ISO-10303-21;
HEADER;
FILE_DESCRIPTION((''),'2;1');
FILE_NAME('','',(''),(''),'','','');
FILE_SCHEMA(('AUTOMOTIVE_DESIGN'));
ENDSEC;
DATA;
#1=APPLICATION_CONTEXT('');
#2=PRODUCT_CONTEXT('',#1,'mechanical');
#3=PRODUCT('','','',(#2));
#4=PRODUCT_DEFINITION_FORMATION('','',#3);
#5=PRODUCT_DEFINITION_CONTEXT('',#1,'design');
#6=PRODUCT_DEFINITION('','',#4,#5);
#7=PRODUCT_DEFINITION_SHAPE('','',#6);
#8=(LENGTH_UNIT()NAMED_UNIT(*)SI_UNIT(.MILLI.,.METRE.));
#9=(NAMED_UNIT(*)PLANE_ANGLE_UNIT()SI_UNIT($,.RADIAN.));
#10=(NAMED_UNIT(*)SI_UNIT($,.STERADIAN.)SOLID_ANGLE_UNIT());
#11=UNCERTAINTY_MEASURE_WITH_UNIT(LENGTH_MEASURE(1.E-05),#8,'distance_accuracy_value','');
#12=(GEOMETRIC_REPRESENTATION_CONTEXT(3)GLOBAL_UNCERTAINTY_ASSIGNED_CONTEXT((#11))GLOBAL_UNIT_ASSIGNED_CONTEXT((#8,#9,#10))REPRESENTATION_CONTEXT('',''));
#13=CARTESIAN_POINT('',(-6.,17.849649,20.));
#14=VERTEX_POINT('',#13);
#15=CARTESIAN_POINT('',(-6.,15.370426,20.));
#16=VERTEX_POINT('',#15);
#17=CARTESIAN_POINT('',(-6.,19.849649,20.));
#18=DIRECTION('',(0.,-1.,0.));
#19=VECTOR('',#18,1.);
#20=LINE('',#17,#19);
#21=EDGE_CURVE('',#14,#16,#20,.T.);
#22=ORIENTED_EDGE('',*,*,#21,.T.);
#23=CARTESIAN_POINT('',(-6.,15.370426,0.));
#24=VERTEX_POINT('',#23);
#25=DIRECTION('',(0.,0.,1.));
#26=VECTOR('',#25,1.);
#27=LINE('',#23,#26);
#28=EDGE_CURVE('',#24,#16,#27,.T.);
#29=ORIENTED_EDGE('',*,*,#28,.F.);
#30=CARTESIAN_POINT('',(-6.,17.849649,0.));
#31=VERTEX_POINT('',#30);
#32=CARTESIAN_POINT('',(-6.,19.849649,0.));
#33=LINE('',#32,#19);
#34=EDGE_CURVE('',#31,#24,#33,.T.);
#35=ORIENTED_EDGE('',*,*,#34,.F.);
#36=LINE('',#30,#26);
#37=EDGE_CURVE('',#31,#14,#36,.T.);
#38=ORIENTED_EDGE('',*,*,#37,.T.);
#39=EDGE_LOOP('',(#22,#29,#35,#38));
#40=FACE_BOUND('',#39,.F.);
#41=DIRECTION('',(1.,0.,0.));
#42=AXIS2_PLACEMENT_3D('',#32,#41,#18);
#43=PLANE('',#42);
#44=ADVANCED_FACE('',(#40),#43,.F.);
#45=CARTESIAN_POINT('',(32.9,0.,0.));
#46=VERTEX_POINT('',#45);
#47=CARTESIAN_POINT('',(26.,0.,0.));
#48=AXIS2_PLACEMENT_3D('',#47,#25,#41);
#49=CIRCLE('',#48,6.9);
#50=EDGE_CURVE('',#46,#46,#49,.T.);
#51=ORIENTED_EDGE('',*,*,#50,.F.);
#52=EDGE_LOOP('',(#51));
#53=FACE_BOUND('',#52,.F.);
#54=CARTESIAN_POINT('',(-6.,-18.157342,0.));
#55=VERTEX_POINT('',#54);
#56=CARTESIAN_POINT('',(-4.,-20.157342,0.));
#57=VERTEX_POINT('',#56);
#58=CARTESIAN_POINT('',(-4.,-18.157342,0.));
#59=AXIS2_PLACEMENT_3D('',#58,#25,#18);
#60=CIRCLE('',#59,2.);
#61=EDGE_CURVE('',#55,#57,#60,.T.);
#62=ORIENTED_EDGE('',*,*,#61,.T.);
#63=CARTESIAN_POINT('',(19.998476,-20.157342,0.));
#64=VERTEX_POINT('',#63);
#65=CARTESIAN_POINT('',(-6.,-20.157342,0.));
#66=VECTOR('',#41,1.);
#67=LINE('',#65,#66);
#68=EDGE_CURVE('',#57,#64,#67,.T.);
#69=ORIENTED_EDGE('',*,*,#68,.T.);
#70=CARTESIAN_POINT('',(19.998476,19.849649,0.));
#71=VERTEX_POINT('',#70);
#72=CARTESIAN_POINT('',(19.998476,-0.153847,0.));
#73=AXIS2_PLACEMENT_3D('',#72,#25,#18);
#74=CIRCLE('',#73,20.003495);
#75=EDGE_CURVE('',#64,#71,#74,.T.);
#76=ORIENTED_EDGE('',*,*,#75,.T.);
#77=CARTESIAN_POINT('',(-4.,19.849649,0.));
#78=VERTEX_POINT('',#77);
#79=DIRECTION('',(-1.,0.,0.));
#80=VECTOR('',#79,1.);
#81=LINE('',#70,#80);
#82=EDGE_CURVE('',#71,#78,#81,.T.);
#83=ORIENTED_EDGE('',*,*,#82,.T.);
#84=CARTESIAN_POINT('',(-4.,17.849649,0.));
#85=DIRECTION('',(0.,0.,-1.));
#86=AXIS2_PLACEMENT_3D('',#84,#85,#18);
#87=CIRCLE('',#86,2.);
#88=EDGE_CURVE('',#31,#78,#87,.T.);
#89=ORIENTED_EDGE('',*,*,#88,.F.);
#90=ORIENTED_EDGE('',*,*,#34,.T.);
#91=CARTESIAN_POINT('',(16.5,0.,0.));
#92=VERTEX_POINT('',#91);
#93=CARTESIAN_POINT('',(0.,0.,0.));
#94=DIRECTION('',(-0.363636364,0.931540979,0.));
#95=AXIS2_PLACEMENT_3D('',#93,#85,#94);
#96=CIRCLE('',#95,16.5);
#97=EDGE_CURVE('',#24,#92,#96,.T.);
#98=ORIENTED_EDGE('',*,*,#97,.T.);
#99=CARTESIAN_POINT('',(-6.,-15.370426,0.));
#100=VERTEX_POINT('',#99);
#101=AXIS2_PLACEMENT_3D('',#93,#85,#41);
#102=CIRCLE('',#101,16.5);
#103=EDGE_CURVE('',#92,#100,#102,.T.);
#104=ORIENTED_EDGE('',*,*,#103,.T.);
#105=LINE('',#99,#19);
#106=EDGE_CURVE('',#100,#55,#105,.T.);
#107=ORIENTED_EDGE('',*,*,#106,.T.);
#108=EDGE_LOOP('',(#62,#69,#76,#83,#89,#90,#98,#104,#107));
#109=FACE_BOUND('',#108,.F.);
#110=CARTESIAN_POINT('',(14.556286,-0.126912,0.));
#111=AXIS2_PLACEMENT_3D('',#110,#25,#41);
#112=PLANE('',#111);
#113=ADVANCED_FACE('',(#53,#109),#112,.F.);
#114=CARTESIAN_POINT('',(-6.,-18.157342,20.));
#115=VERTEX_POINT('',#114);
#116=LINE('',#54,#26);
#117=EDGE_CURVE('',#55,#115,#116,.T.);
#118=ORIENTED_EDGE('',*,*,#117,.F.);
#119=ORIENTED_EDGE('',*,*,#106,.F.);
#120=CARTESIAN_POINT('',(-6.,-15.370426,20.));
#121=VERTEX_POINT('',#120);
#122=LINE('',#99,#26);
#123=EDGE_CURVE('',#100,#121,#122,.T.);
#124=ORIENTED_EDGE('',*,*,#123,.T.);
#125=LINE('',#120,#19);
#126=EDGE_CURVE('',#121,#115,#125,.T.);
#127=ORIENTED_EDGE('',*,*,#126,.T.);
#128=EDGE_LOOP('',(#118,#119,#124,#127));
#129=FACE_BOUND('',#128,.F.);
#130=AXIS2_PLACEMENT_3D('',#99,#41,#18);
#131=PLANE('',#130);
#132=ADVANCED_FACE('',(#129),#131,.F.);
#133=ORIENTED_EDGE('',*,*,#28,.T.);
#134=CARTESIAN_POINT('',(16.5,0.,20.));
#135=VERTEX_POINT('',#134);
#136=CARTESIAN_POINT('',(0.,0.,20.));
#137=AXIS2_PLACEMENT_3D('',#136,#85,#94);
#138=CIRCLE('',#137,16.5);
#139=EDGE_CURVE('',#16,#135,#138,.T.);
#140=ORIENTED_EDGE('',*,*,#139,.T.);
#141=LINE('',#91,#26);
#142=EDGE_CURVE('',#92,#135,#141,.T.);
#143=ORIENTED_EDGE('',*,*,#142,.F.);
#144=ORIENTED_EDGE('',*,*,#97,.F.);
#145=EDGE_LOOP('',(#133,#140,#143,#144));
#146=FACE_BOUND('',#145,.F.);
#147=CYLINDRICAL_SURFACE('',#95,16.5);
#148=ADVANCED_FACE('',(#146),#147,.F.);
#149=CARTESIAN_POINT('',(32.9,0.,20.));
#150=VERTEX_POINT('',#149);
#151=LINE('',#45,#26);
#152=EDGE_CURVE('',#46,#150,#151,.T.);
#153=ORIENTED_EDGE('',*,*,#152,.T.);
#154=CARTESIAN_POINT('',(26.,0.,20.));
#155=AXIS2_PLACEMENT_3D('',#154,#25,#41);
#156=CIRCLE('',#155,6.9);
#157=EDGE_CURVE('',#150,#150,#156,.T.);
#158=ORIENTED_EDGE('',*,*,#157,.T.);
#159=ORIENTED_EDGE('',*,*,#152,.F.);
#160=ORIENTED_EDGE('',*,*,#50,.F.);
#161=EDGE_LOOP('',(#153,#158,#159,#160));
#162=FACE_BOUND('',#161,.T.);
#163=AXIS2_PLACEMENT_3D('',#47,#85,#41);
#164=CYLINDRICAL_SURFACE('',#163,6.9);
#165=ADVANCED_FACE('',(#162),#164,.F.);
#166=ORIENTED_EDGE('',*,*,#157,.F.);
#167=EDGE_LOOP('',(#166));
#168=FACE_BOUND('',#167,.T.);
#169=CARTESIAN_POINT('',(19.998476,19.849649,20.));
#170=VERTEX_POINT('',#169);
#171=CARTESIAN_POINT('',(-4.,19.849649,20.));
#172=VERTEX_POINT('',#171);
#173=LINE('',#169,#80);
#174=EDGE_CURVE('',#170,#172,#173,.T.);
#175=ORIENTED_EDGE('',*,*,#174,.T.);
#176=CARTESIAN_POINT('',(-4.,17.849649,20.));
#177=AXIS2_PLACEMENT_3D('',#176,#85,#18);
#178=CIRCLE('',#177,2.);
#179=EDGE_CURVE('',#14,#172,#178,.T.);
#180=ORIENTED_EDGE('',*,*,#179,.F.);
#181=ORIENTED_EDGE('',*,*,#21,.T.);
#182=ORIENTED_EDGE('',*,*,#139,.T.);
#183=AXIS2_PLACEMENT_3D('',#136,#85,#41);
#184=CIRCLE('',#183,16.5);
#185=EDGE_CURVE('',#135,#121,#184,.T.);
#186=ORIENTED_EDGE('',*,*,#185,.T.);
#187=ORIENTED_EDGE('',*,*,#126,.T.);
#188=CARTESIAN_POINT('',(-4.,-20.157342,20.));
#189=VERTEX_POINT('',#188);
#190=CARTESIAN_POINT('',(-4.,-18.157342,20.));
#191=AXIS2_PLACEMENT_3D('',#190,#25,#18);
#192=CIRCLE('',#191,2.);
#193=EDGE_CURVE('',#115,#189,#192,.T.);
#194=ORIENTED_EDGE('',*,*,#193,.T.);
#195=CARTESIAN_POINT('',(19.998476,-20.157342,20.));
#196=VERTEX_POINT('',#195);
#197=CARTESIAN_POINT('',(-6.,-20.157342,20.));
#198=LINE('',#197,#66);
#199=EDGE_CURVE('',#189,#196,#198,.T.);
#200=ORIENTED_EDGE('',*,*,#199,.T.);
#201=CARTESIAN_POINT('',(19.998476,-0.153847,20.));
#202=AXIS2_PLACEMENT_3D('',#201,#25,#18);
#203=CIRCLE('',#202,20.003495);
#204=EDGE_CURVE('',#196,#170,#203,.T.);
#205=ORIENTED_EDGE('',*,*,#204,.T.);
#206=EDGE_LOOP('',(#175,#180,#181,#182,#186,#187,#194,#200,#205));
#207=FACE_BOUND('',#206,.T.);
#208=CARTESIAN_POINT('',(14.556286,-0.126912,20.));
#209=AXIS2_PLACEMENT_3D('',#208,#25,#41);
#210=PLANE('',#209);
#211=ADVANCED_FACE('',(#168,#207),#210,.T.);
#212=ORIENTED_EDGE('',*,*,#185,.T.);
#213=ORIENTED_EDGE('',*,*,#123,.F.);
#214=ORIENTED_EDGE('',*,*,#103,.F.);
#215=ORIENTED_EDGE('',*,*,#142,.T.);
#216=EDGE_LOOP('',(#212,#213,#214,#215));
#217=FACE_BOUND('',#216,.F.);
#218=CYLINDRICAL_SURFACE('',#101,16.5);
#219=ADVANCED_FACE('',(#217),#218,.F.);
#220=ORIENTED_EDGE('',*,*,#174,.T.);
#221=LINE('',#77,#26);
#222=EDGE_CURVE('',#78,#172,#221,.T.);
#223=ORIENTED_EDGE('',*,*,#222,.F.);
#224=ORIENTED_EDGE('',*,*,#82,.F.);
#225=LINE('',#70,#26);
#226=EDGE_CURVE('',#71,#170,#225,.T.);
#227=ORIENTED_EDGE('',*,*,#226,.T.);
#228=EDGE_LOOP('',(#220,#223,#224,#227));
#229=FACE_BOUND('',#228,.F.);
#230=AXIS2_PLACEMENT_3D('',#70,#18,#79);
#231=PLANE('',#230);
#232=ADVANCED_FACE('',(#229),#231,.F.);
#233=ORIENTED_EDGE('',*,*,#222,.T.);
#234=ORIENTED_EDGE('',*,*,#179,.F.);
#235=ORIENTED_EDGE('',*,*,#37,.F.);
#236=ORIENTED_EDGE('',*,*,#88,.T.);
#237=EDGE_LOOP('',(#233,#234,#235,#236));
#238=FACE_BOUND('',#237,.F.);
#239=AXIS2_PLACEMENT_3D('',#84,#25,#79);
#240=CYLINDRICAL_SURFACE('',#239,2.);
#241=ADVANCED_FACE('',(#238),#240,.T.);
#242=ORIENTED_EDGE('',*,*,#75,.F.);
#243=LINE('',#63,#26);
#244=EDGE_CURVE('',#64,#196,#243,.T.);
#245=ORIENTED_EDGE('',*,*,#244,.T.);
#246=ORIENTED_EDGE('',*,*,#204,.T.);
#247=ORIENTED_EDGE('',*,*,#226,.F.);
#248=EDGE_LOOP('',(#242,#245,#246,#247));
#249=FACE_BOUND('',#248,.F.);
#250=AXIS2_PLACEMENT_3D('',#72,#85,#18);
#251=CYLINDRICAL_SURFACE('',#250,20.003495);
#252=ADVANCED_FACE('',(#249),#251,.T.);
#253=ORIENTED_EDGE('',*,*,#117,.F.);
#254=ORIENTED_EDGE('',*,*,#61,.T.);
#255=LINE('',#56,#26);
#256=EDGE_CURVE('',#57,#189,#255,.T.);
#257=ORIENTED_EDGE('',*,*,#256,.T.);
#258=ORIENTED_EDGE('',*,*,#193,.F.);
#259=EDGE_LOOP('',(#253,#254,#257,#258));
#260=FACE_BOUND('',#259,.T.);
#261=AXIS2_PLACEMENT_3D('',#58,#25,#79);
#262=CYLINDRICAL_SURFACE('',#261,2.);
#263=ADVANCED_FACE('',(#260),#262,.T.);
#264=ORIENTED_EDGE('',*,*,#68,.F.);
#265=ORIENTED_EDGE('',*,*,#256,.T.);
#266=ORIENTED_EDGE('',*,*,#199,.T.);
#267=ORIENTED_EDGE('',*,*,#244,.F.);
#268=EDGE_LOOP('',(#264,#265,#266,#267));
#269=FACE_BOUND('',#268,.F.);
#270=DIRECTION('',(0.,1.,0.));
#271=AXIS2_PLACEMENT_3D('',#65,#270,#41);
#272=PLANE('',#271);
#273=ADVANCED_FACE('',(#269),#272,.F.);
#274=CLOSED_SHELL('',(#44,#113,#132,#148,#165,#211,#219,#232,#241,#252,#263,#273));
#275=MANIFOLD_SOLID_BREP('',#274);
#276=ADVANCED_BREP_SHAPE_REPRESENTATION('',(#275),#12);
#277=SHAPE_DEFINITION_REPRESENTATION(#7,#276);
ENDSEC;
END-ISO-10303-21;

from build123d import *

# Parameters (mm, degrees)
F0_R     = 6.9
F1_DEPTH = 20
F3_R     = 2


# Not quite as in the source:
# - a feature of the source that left no trace in its solid (it failed there, or was rolled back) is left out


with BuildPart() as f1:
    # F0 (on Top) → F1 (new body)
    with BuildSketch(Plane.XY):
        with BuildLine():
            ThreePointArc((-6, 15.3704261489), (9.3072552345, 13.6244265934), (16.5, 0))
            ThreePointArc((16.5, 0), (9.3072552345, -13.6244265934), (-6, -15.3704261489))
            Line((-6, -15.3704261489), (-6, -20.1503510079))
            Line((-6, -20.1503510079), (-6, -20.1573419994))
            Line((-6, -20.1573419994), (19.9984760751, -20.1573419994))
            ThreePointArc((19.9984760751, -20.1573419994), (40.0019715709, -0.1538465036), (19.9984760751, 19.8496489921))
            Line((19.9984760751, 19.8496489921), (-6, 19.8496489921))
            Line((-6, 19.8496489921), (-6, 15.3704261489))
        make_face()
        with Locations((26, 0)):
            Circle(F0_R, mode=Mode.SUBTRACT)
    extrude(amount=F1_DEPTH)

    # F3
    f3_edges = [f1.edges().sort_by_distance(p)[0] for p in [
        (-6, -20.157342, 10),
        (-6, 19.849649, 10),
    ]]
    fillet(f3_edges, radius=F3_R)


solid = f1.part
